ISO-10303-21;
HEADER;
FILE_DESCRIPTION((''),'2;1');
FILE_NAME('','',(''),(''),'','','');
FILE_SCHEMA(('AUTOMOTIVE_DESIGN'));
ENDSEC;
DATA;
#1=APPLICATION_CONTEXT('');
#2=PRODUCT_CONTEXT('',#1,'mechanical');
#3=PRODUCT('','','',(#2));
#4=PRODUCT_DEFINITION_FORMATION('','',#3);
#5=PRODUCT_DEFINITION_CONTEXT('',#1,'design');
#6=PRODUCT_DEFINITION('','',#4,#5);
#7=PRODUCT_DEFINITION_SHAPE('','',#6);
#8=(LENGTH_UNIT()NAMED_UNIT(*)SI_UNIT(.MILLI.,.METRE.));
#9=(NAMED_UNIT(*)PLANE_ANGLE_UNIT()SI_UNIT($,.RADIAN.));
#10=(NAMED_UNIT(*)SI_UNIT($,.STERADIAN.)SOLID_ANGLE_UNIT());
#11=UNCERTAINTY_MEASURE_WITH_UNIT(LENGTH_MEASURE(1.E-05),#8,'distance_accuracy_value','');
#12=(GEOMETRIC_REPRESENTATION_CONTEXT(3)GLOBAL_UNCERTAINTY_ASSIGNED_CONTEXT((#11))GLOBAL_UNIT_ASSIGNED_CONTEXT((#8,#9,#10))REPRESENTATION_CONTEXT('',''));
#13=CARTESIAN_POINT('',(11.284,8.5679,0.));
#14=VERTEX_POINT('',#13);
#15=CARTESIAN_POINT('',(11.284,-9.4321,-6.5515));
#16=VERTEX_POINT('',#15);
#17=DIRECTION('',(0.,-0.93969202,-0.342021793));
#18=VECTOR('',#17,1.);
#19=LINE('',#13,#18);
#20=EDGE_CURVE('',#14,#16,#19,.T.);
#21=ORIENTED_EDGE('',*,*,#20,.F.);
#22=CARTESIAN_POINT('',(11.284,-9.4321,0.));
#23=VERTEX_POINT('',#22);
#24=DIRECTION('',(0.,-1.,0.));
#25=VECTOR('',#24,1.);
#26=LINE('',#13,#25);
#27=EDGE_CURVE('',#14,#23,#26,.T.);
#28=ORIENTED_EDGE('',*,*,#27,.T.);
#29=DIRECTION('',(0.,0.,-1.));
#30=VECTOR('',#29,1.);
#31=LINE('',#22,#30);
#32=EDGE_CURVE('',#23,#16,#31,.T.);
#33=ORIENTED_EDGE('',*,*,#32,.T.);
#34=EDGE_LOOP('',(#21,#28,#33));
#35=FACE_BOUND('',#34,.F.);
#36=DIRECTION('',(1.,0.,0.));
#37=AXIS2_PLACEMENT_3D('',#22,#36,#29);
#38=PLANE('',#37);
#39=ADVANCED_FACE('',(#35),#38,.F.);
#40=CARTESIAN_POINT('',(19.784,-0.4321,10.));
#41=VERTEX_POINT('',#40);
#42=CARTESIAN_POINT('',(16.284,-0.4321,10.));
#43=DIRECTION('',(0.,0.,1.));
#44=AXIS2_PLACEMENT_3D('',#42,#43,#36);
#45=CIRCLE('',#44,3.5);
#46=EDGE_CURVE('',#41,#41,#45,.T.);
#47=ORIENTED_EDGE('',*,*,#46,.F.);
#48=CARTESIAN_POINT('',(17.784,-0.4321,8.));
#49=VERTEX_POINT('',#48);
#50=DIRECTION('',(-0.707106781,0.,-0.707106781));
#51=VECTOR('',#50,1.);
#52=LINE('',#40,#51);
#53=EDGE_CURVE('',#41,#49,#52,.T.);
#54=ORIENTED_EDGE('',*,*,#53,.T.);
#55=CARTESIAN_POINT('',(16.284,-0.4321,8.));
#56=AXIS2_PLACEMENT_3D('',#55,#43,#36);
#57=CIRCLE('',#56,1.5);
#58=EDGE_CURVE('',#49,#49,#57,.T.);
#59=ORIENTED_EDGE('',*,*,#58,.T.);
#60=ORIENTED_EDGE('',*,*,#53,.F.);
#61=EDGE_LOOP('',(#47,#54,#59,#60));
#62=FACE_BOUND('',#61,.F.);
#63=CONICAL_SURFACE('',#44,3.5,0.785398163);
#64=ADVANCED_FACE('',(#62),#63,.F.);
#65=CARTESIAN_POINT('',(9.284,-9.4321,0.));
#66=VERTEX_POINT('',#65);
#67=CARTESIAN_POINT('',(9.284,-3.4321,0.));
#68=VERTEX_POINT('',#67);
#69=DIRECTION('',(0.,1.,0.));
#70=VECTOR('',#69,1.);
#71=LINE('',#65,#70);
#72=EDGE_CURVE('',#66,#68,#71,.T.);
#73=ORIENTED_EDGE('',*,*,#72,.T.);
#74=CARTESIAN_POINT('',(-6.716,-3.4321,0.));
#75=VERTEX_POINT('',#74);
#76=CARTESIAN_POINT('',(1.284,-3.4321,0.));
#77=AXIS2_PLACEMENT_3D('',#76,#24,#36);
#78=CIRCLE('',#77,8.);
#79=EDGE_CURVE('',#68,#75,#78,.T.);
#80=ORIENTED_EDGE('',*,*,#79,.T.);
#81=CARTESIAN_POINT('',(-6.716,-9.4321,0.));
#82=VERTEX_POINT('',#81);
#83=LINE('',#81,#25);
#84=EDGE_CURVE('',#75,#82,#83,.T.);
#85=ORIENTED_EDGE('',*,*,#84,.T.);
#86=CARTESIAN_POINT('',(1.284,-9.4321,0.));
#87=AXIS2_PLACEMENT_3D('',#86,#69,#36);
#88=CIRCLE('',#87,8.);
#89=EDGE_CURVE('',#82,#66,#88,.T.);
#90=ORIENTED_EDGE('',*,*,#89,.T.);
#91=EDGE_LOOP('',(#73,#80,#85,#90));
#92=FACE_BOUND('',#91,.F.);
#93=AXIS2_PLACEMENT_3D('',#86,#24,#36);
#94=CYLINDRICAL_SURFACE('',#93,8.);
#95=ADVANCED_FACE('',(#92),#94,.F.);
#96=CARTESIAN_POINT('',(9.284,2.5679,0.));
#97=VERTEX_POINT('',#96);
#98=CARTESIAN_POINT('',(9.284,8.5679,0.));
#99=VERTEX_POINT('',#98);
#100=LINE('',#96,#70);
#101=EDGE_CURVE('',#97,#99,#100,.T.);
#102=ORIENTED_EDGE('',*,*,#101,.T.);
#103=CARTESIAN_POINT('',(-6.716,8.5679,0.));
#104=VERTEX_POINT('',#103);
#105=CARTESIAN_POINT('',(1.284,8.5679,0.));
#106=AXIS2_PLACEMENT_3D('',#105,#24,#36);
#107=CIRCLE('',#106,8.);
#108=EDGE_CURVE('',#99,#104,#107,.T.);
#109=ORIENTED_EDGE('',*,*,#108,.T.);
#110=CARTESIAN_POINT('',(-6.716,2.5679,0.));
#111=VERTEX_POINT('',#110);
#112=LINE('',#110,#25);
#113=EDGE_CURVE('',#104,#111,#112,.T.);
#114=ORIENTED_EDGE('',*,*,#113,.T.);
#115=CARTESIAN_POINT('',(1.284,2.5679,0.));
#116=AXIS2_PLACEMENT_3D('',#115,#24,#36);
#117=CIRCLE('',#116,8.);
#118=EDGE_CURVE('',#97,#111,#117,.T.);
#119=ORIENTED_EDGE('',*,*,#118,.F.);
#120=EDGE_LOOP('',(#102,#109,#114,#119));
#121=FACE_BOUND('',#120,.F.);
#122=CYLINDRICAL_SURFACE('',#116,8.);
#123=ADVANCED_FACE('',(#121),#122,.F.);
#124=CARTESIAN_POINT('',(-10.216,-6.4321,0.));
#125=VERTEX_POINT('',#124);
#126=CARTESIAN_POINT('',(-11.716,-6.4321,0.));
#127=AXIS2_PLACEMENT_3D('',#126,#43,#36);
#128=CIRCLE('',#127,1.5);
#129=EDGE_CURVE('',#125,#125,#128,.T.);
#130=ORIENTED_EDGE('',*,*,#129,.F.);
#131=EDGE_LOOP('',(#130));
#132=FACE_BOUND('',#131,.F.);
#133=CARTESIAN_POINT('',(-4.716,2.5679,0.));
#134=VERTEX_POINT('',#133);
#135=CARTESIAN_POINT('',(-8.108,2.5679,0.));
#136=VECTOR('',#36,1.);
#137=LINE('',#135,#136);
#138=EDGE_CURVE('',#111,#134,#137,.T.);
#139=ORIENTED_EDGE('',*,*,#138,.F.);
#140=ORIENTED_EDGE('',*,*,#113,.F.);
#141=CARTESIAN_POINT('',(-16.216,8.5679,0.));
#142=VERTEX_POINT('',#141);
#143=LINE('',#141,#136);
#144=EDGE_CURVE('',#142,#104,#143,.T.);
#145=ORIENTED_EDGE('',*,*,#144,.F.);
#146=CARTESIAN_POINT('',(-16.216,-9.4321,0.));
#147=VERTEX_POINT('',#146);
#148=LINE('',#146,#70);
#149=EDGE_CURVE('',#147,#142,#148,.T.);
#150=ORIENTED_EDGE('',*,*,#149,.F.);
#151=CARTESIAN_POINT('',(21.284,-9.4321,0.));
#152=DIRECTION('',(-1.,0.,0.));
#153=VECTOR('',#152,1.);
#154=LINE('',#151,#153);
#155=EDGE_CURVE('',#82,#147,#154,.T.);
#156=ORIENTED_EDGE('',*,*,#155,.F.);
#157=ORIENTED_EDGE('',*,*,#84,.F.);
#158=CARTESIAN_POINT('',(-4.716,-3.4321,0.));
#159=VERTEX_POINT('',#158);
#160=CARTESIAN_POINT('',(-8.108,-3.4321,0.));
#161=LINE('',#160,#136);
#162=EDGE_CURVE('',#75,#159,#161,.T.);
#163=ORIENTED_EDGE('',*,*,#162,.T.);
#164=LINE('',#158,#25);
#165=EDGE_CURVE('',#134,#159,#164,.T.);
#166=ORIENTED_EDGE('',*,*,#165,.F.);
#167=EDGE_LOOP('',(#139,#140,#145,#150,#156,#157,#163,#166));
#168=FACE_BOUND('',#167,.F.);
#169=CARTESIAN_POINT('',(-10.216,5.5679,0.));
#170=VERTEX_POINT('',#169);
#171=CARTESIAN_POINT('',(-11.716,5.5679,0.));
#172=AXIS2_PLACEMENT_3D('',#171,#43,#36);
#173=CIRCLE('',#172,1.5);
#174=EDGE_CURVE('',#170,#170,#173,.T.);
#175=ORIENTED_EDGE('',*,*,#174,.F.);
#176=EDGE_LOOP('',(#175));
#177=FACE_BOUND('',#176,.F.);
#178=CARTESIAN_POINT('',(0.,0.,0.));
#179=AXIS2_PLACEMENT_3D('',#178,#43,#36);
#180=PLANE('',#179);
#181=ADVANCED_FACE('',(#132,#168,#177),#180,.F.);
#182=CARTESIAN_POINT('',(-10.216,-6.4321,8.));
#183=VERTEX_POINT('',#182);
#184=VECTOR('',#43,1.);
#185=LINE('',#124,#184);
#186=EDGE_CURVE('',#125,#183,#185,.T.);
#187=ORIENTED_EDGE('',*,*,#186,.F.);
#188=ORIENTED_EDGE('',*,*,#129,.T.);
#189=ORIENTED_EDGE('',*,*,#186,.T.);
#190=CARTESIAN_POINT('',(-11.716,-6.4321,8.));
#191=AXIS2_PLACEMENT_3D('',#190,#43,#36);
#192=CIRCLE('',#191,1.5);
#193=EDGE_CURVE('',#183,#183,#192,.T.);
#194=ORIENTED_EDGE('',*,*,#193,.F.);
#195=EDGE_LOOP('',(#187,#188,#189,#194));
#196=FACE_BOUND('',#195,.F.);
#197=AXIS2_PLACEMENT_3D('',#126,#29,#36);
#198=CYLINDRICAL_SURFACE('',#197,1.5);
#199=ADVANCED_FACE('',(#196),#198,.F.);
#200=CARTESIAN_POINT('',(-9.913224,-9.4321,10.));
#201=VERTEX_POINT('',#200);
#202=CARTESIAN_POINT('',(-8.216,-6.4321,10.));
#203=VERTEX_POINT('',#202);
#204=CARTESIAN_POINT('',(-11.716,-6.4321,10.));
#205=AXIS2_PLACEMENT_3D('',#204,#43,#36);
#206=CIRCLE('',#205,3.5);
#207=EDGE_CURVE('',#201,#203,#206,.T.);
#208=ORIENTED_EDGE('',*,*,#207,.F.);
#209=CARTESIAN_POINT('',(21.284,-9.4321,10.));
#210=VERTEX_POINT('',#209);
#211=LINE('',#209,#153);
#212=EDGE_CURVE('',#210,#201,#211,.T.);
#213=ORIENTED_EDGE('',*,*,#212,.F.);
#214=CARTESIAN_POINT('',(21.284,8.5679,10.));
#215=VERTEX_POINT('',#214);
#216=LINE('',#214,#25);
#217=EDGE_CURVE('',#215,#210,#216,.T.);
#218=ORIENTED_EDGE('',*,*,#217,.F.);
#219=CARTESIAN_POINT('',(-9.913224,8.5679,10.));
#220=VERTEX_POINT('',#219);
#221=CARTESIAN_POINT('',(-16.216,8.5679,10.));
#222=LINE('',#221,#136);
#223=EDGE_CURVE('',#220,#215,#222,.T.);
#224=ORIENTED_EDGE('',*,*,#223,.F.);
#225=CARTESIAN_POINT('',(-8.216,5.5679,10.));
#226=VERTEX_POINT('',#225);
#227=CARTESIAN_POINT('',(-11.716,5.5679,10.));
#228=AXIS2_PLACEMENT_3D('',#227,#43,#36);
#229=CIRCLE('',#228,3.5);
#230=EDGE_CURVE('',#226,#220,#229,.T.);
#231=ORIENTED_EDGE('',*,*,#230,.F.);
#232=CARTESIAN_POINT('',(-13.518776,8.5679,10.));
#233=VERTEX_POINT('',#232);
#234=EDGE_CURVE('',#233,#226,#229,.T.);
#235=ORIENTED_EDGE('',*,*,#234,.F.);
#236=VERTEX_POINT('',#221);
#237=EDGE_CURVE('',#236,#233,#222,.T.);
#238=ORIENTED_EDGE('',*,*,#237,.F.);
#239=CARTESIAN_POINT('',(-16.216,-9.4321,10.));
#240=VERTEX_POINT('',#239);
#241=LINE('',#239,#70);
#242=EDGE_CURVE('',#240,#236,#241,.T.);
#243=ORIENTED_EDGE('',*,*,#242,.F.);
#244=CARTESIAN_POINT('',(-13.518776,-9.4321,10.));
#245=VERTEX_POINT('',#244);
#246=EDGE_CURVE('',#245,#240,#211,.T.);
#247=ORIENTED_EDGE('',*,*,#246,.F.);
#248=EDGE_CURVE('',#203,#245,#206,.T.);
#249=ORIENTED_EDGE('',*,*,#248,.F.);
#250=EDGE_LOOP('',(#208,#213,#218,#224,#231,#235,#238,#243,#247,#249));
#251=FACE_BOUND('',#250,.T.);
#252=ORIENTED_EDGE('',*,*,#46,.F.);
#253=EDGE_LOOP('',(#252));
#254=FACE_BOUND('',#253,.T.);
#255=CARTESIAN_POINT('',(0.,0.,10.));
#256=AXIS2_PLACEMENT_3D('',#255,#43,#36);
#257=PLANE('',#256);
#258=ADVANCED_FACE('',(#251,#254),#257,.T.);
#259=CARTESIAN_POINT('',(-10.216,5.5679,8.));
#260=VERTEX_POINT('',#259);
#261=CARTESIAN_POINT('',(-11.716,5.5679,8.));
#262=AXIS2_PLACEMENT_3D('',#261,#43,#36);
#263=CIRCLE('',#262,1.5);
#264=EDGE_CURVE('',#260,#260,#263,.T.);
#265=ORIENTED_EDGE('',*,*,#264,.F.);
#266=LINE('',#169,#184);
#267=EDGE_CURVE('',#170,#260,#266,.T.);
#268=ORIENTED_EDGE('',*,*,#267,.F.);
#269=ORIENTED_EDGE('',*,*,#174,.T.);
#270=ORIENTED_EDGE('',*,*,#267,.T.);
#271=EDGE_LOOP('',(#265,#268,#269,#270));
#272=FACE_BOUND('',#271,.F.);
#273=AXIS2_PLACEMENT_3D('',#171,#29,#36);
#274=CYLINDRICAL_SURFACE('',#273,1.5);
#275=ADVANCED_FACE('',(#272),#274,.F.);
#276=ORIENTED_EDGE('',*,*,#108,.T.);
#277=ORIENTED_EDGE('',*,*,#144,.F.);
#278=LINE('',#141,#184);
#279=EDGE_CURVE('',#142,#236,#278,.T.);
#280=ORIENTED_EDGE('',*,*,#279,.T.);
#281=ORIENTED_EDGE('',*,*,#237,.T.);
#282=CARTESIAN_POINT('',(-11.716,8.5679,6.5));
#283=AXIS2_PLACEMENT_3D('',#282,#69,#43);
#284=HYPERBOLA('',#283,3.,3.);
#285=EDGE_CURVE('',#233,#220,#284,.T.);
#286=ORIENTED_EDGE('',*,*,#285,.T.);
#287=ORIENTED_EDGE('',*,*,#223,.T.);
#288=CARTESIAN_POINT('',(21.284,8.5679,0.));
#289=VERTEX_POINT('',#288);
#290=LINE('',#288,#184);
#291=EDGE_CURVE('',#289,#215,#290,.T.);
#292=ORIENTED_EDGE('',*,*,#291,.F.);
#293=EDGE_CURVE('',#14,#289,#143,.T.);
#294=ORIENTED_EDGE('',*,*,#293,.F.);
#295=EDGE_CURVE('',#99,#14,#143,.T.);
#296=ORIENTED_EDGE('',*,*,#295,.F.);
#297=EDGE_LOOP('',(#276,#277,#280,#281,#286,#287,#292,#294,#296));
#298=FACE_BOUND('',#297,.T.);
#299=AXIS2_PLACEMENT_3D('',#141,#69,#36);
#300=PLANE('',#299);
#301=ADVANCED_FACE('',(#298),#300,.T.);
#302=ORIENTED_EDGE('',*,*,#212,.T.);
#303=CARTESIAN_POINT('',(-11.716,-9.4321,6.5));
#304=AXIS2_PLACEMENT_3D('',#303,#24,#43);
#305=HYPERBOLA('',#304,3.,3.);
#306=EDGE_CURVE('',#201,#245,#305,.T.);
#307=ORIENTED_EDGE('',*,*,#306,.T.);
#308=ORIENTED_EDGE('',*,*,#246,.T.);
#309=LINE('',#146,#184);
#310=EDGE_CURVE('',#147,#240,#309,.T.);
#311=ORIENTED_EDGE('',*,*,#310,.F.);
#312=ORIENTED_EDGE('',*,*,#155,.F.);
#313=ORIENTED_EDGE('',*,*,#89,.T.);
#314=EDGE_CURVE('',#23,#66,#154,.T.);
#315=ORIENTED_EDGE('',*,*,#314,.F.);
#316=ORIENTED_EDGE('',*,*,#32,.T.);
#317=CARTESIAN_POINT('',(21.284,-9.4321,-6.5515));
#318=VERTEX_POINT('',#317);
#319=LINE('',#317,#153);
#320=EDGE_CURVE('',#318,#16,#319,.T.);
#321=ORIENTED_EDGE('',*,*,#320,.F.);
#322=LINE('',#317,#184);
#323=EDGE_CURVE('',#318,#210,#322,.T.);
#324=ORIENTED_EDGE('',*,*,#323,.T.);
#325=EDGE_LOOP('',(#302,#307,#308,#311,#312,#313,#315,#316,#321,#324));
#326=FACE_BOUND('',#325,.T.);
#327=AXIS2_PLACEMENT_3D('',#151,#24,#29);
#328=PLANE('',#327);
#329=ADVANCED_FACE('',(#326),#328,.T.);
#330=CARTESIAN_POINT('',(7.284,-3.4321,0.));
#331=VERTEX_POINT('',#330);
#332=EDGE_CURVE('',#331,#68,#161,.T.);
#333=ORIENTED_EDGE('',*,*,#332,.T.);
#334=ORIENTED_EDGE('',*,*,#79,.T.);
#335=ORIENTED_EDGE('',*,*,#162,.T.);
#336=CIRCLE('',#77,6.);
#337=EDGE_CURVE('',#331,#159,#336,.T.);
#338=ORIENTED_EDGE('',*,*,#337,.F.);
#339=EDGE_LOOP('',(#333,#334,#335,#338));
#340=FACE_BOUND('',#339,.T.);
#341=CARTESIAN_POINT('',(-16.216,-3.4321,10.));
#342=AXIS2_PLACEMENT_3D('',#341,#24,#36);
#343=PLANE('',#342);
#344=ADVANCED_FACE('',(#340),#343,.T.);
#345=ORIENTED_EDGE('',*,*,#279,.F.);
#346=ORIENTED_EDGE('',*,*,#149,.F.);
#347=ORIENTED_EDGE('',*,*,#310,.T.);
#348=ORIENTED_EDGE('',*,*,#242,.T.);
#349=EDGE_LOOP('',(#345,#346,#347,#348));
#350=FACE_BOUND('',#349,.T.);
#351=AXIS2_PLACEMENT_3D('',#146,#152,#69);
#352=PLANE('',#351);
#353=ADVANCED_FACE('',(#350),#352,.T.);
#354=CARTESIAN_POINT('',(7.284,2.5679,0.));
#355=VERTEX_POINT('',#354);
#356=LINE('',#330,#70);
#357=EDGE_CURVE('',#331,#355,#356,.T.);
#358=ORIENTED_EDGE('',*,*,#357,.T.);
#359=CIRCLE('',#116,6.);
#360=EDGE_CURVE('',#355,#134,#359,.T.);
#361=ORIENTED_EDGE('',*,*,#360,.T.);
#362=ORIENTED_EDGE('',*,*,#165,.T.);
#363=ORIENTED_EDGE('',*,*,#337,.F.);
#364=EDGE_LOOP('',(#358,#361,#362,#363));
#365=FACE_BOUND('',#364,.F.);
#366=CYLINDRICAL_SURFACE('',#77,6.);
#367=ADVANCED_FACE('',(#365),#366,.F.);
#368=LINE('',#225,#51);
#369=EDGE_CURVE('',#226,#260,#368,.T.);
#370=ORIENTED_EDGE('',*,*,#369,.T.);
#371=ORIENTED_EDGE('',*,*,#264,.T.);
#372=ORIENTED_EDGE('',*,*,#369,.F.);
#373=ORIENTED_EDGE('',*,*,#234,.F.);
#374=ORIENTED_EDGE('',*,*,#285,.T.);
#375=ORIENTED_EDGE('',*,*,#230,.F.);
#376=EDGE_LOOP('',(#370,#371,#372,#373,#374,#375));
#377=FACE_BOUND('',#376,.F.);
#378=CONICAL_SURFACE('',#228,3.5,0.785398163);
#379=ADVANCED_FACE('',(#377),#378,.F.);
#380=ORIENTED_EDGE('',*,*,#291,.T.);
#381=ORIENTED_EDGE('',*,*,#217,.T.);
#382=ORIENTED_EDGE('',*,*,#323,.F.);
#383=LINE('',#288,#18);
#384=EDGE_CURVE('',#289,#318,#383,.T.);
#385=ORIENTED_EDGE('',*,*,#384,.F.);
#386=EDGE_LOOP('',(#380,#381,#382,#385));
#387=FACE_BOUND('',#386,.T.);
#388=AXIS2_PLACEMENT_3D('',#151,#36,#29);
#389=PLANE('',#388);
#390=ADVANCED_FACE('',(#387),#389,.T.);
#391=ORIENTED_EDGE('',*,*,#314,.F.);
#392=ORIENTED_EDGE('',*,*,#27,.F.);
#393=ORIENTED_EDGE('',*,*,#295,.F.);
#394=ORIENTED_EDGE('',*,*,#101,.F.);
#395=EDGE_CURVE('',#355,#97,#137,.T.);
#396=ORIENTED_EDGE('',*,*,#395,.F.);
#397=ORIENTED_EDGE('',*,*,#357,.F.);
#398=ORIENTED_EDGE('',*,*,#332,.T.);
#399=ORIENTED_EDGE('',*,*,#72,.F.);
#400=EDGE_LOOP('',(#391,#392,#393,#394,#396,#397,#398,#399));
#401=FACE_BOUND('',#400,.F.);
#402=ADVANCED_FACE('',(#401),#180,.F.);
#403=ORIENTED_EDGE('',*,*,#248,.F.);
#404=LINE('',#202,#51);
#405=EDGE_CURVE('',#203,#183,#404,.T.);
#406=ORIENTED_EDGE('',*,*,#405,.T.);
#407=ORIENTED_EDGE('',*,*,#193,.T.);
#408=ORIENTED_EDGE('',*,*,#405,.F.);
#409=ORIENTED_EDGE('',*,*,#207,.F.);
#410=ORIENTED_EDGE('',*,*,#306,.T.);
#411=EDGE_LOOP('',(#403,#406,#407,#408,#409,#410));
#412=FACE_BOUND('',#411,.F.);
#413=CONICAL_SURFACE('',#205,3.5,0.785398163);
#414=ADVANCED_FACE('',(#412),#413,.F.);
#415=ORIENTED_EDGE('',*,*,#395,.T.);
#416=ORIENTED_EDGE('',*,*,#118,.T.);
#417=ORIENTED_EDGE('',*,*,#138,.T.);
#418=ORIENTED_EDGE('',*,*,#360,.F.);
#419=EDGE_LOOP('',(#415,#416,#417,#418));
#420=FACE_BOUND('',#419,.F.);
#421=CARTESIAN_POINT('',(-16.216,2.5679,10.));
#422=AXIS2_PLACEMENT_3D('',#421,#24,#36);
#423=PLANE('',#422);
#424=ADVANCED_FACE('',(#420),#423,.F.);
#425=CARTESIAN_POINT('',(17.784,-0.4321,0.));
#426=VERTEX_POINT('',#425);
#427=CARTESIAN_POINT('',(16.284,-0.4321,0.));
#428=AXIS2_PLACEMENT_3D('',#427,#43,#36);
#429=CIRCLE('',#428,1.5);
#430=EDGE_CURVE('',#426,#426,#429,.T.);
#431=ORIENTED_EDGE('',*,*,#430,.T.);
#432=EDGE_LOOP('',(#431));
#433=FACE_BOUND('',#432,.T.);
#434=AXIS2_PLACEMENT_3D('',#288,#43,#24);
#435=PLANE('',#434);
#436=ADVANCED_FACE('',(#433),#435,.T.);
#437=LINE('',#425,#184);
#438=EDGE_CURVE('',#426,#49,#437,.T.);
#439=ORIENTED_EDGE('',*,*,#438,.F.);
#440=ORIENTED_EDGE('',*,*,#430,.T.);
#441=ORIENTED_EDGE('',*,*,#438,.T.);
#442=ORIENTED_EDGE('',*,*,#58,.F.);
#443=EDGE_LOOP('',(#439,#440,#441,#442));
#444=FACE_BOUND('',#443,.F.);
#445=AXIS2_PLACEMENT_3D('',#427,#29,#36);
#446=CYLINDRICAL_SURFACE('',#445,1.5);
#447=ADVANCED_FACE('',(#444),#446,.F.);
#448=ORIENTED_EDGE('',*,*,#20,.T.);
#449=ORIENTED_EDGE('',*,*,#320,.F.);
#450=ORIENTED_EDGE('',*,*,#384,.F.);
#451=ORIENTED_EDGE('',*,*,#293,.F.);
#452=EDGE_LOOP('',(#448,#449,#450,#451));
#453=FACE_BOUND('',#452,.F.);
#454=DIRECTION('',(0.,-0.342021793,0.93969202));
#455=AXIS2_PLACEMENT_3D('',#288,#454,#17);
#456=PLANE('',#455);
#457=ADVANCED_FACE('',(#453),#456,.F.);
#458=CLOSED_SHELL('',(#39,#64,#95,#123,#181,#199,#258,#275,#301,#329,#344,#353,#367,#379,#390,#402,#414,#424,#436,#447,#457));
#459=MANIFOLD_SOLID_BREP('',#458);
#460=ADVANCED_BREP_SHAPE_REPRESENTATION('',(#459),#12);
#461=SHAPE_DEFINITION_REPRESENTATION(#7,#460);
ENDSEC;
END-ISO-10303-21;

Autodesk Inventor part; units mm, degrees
ref_plane "YZ Plane" through (0, 0, 0) normal (1, 0, 0) x (0, 1, 0)
ref_plane "XZ Plane" through (0, 0, 0) normal (0, 1, 0) x (-1, 0, 0)
ref_plane "XY Plane" through (0, 0, 0) normal (0, 0, 1) x (1, 0, 0)
sketch "Sketch1" plane through (0, 0, 0) normal (0, 0, 1) x (1, 0, 0)
  line L0 (-13.216, 7.0679) -> (17.784, 7.0679) construction
  line L1 (17.784, 7.0679) -> (17.784, -7.9321) construction
  line L2 (17.784, -7.9321) -> (-13.216, -7.9321) construction
  line L3 (-13.216, -7.9321) -> (-13.216, 7.0679) construction
  circle A0 centre (-11.716, 5.5679) radius 1.5
  circle A1 centre (-11.716, -6.4321) radius 1.5
  circle A2 centre (16.284, -0.4321) radius 1.5
  line L4 (-16.216, 8.5679) -> (21.284, 8.5679)
  line L5 (21.284, 8.5679) -> (21.284, -9.4321)
  line L6 (21.284, -9.4321) -> (-16.216, -9.4321)
  line L7 (-16.216, -9.4321) -> (-16.216, 8.5679)
  point P0 (0, 0)
  dimension "d0" = 28
  dimension "d1" = 6
  dimension "d2" = 6
  dimension "d3" = 3
  dimension "d4" = 3
  dimension "d5" = 3
  dimension "d10" = 4.5
  dimension "d11" = 3
  dimension "d13" = 1.5
  dimension "d34" = 5
extrude "Extrusion1" add sketch "Sketch1" along normal blind 10
sketch "Sketch3" plane through (-16.216, -9.4321, 10) normal (0, -1, 0) x (1, 0, 0)
  line L0 (37.5, -10) -> (0, -10) projected
  circle A0 centre (17.5, -10) radius 6 construction
  line L1 (23.5, -10) -> (23.5, -2.9049) construction
  circle A1 centre (17.5, -10) radius 8
  line L2 (0, -10) -> (0, 0) projected
  line L3 (9.5, -10) -> (9.5, -3.6397) construction
  point P0 (27.5, -10)
  point P1 (16.216, -10)
  dimension "d19" = 12
  dimension "d21" = 16
  dimension "d30" = 9.5
extrude "Extrusion3" cut sketch "Sketch3" against normal blind 6
sketch "Sketch4" plane through (-16.216, -3.4321, 10) normal (0, -1, 0) x (1, 0, 0)
  arc A0 (25.5, -10) -> (9.5, -10) centre (17.5, -10) ccw projected
  circle A1 centre (17.5, -10) radius 6
  point P0 (16.216, -10)
  dimension "d24" = 12
extrude "Extrusion4" cut sketch "Sketch4" against normal blind 6
sketch "Sketch5" plane through (-16.216, 2.5679, 10) normal (0, -1, 0) x (1, 0, 0)
  arc A0 (23.5, -10) -> (11.5, -10) centre (17.5, -10) ccw projected
  circle A1 centre (17.5, -10) radius 8
  point P0 (16.216, -10)
  dimension "d27" = 16
extrude "Extrusion5" cut sketch "Sketch5" against normal blind 19.5
sketch "Sketch6" plane through (21.284, -9.4321, 0) normal (1, 0, 0) x (0, 0, -1)
  line L0 (0, 18) -> (0, 0) projected
  line L1 (0, 18) -> (-10, 18) projected
  line L2 (0, 0) -> (-10, 0) projected
  line L3 (0, 18) -> (6.5515, 0)
  line L4 (0, 18) -> (12.9005, 18) construction
  line L5 (0, 0) -> (6.5515, 0)
  point P0 (0, 9.4321)
  dimension "d31" = 70
extrude "Extrusion6" add sketch "Sketch6" against normal blind 10
chamfer "Chamfer1" distance 2 angle 45 3 edges at (-13.216, 5.5679, 10) (-13.216, -6.4321, 10) (14.784, -0.4321, 10)
equation "\"d4\" = d3"
equation "\"d5\" = d3"
properties part number "Lukker" material "PLA Plastic"
